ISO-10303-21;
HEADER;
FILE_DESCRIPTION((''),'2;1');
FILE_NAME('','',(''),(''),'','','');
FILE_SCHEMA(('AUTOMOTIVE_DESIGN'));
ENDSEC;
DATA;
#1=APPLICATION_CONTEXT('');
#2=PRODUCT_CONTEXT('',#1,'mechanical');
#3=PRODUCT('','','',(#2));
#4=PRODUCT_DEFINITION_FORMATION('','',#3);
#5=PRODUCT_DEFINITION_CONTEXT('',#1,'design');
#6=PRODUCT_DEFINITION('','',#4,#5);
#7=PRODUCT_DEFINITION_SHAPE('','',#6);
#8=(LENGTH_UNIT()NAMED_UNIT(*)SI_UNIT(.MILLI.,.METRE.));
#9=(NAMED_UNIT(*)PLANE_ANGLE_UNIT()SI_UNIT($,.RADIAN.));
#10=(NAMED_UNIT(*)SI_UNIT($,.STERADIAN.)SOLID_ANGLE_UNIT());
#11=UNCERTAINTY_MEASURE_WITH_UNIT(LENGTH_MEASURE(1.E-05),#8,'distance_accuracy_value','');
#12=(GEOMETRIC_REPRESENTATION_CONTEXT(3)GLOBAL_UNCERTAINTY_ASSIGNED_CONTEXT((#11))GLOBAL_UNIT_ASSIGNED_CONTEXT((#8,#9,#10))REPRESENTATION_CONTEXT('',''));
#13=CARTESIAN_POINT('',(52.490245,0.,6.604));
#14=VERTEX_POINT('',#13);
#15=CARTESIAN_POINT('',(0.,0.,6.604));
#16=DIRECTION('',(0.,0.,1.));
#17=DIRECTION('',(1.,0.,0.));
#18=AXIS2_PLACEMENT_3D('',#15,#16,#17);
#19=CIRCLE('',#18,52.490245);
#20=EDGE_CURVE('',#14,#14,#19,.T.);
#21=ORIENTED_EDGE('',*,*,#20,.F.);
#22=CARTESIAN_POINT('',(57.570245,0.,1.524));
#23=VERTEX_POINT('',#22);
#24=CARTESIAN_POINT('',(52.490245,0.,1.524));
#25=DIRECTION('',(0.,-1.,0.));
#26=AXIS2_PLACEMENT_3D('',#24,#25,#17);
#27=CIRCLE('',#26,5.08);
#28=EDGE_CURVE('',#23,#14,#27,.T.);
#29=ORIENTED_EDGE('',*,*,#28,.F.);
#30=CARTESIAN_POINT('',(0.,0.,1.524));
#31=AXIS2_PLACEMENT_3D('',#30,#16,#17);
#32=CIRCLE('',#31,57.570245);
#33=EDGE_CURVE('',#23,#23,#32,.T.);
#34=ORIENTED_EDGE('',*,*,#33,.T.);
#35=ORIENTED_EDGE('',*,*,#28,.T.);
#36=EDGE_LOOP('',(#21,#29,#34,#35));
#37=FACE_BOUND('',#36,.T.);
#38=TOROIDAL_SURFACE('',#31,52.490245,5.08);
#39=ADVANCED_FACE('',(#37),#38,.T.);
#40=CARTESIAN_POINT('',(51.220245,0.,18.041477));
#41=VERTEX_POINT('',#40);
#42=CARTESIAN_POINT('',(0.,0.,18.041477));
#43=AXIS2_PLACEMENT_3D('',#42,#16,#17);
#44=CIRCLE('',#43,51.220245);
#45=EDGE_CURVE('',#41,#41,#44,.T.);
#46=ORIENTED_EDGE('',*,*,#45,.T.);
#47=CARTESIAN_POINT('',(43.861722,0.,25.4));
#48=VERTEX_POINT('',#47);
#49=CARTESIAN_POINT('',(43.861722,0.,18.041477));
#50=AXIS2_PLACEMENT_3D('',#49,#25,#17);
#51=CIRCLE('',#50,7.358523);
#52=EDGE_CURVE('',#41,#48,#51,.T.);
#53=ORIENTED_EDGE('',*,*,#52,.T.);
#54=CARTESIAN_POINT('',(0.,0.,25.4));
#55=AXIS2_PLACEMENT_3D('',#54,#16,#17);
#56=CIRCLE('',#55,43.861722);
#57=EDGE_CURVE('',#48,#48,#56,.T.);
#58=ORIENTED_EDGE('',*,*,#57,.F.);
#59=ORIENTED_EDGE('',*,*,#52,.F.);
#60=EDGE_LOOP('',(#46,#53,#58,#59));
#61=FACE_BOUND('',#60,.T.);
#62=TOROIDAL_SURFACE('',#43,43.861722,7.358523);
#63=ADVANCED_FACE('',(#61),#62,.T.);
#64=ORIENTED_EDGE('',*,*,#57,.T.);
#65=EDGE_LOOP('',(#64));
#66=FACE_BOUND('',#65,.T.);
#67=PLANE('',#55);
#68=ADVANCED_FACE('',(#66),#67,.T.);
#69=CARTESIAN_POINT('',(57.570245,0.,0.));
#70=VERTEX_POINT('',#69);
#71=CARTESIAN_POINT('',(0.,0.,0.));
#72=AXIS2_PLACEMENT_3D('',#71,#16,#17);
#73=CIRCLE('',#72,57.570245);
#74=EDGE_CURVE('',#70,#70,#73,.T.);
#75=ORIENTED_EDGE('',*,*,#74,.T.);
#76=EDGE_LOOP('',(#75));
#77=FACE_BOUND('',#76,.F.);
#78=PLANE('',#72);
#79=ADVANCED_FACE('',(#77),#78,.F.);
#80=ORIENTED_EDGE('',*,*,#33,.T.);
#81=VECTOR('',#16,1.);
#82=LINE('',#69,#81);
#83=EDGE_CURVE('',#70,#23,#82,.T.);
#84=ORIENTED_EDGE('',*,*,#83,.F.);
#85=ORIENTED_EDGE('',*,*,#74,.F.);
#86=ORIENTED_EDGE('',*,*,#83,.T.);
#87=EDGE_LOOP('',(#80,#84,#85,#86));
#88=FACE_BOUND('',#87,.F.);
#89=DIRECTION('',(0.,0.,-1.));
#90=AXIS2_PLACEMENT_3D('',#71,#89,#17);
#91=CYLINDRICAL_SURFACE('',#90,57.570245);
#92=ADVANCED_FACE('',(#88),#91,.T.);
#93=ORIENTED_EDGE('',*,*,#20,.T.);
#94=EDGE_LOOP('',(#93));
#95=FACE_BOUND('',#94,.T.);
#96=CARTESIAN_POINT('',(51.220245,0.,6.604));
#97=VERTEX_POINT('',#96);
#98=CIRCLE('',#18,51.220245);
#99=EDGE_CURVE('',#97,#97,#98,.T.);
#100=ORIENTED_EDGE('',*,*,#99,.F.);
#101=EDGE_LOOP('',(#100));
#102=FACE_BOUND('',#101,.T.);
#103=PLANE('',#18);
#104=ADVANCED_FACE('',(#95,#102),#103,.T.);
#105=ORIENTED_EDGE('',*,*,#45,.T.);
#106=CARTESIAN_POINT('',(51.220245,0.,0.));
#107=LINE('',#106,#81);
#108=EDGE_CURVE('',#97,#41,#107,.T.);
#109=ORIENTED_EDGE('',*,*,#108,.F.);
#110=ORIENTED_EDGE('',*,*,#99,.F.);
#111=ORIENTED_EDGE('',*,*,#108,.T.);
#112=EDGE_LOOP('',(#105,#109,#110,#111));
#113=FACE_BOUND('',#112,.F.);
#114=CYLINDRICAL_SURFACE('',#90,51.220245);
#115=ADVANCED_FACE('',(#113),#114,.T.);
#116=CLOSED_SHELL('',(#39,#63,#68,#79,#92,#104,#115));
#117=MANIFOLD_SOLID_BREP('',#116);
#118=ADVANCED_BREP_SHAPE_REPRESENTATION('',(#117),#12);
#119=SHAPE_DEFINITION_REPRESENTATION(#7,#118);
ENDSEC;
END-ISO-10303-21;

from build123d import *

# Parameters (mm, degrees)
F0_R     = 51.2202453394
F2_DEPTH = 25.4
F3_R     = 7.3585229381
F0_R_2   = 57.5702453394
F4_DEPTH = 6.604
F5_R     = 5.08


# Not quite as in the source:
# - the program builds the solid bodies; features that only make, move or delete a surface that nothing else refers to are left out


with BuildPart() as f2:
    # F0 (on Top) → F2 (new body)
    with BuildSketch(Plane.XY):
        Circle(F0_R)
    extrude(amount=F2_DEPTH)

    # F3
    f3_edges = [f2.edges().sort_by_distance(p)[0] for p in [
        (-51.220245, 0, 25.4),
    ]]
    fillet(f3_edges, radius=F3_R)

    # F0 (on Top) → F4 (join)
    with BuildSketch(Plane.XY):
        Circle(F0_R_2)
        Circle(F0_R, mode=Mode.SUBTRACT)
    extrude(amount=F4_DEPTH)

    # F5
    f5_edges = [f2.edges().sort_by_distance(p)[0] for p in [
        (-57.570245, 0, 6.604),
    ]]
    fillet(f5_edges, radius=F5_R)


solid = f2.part
